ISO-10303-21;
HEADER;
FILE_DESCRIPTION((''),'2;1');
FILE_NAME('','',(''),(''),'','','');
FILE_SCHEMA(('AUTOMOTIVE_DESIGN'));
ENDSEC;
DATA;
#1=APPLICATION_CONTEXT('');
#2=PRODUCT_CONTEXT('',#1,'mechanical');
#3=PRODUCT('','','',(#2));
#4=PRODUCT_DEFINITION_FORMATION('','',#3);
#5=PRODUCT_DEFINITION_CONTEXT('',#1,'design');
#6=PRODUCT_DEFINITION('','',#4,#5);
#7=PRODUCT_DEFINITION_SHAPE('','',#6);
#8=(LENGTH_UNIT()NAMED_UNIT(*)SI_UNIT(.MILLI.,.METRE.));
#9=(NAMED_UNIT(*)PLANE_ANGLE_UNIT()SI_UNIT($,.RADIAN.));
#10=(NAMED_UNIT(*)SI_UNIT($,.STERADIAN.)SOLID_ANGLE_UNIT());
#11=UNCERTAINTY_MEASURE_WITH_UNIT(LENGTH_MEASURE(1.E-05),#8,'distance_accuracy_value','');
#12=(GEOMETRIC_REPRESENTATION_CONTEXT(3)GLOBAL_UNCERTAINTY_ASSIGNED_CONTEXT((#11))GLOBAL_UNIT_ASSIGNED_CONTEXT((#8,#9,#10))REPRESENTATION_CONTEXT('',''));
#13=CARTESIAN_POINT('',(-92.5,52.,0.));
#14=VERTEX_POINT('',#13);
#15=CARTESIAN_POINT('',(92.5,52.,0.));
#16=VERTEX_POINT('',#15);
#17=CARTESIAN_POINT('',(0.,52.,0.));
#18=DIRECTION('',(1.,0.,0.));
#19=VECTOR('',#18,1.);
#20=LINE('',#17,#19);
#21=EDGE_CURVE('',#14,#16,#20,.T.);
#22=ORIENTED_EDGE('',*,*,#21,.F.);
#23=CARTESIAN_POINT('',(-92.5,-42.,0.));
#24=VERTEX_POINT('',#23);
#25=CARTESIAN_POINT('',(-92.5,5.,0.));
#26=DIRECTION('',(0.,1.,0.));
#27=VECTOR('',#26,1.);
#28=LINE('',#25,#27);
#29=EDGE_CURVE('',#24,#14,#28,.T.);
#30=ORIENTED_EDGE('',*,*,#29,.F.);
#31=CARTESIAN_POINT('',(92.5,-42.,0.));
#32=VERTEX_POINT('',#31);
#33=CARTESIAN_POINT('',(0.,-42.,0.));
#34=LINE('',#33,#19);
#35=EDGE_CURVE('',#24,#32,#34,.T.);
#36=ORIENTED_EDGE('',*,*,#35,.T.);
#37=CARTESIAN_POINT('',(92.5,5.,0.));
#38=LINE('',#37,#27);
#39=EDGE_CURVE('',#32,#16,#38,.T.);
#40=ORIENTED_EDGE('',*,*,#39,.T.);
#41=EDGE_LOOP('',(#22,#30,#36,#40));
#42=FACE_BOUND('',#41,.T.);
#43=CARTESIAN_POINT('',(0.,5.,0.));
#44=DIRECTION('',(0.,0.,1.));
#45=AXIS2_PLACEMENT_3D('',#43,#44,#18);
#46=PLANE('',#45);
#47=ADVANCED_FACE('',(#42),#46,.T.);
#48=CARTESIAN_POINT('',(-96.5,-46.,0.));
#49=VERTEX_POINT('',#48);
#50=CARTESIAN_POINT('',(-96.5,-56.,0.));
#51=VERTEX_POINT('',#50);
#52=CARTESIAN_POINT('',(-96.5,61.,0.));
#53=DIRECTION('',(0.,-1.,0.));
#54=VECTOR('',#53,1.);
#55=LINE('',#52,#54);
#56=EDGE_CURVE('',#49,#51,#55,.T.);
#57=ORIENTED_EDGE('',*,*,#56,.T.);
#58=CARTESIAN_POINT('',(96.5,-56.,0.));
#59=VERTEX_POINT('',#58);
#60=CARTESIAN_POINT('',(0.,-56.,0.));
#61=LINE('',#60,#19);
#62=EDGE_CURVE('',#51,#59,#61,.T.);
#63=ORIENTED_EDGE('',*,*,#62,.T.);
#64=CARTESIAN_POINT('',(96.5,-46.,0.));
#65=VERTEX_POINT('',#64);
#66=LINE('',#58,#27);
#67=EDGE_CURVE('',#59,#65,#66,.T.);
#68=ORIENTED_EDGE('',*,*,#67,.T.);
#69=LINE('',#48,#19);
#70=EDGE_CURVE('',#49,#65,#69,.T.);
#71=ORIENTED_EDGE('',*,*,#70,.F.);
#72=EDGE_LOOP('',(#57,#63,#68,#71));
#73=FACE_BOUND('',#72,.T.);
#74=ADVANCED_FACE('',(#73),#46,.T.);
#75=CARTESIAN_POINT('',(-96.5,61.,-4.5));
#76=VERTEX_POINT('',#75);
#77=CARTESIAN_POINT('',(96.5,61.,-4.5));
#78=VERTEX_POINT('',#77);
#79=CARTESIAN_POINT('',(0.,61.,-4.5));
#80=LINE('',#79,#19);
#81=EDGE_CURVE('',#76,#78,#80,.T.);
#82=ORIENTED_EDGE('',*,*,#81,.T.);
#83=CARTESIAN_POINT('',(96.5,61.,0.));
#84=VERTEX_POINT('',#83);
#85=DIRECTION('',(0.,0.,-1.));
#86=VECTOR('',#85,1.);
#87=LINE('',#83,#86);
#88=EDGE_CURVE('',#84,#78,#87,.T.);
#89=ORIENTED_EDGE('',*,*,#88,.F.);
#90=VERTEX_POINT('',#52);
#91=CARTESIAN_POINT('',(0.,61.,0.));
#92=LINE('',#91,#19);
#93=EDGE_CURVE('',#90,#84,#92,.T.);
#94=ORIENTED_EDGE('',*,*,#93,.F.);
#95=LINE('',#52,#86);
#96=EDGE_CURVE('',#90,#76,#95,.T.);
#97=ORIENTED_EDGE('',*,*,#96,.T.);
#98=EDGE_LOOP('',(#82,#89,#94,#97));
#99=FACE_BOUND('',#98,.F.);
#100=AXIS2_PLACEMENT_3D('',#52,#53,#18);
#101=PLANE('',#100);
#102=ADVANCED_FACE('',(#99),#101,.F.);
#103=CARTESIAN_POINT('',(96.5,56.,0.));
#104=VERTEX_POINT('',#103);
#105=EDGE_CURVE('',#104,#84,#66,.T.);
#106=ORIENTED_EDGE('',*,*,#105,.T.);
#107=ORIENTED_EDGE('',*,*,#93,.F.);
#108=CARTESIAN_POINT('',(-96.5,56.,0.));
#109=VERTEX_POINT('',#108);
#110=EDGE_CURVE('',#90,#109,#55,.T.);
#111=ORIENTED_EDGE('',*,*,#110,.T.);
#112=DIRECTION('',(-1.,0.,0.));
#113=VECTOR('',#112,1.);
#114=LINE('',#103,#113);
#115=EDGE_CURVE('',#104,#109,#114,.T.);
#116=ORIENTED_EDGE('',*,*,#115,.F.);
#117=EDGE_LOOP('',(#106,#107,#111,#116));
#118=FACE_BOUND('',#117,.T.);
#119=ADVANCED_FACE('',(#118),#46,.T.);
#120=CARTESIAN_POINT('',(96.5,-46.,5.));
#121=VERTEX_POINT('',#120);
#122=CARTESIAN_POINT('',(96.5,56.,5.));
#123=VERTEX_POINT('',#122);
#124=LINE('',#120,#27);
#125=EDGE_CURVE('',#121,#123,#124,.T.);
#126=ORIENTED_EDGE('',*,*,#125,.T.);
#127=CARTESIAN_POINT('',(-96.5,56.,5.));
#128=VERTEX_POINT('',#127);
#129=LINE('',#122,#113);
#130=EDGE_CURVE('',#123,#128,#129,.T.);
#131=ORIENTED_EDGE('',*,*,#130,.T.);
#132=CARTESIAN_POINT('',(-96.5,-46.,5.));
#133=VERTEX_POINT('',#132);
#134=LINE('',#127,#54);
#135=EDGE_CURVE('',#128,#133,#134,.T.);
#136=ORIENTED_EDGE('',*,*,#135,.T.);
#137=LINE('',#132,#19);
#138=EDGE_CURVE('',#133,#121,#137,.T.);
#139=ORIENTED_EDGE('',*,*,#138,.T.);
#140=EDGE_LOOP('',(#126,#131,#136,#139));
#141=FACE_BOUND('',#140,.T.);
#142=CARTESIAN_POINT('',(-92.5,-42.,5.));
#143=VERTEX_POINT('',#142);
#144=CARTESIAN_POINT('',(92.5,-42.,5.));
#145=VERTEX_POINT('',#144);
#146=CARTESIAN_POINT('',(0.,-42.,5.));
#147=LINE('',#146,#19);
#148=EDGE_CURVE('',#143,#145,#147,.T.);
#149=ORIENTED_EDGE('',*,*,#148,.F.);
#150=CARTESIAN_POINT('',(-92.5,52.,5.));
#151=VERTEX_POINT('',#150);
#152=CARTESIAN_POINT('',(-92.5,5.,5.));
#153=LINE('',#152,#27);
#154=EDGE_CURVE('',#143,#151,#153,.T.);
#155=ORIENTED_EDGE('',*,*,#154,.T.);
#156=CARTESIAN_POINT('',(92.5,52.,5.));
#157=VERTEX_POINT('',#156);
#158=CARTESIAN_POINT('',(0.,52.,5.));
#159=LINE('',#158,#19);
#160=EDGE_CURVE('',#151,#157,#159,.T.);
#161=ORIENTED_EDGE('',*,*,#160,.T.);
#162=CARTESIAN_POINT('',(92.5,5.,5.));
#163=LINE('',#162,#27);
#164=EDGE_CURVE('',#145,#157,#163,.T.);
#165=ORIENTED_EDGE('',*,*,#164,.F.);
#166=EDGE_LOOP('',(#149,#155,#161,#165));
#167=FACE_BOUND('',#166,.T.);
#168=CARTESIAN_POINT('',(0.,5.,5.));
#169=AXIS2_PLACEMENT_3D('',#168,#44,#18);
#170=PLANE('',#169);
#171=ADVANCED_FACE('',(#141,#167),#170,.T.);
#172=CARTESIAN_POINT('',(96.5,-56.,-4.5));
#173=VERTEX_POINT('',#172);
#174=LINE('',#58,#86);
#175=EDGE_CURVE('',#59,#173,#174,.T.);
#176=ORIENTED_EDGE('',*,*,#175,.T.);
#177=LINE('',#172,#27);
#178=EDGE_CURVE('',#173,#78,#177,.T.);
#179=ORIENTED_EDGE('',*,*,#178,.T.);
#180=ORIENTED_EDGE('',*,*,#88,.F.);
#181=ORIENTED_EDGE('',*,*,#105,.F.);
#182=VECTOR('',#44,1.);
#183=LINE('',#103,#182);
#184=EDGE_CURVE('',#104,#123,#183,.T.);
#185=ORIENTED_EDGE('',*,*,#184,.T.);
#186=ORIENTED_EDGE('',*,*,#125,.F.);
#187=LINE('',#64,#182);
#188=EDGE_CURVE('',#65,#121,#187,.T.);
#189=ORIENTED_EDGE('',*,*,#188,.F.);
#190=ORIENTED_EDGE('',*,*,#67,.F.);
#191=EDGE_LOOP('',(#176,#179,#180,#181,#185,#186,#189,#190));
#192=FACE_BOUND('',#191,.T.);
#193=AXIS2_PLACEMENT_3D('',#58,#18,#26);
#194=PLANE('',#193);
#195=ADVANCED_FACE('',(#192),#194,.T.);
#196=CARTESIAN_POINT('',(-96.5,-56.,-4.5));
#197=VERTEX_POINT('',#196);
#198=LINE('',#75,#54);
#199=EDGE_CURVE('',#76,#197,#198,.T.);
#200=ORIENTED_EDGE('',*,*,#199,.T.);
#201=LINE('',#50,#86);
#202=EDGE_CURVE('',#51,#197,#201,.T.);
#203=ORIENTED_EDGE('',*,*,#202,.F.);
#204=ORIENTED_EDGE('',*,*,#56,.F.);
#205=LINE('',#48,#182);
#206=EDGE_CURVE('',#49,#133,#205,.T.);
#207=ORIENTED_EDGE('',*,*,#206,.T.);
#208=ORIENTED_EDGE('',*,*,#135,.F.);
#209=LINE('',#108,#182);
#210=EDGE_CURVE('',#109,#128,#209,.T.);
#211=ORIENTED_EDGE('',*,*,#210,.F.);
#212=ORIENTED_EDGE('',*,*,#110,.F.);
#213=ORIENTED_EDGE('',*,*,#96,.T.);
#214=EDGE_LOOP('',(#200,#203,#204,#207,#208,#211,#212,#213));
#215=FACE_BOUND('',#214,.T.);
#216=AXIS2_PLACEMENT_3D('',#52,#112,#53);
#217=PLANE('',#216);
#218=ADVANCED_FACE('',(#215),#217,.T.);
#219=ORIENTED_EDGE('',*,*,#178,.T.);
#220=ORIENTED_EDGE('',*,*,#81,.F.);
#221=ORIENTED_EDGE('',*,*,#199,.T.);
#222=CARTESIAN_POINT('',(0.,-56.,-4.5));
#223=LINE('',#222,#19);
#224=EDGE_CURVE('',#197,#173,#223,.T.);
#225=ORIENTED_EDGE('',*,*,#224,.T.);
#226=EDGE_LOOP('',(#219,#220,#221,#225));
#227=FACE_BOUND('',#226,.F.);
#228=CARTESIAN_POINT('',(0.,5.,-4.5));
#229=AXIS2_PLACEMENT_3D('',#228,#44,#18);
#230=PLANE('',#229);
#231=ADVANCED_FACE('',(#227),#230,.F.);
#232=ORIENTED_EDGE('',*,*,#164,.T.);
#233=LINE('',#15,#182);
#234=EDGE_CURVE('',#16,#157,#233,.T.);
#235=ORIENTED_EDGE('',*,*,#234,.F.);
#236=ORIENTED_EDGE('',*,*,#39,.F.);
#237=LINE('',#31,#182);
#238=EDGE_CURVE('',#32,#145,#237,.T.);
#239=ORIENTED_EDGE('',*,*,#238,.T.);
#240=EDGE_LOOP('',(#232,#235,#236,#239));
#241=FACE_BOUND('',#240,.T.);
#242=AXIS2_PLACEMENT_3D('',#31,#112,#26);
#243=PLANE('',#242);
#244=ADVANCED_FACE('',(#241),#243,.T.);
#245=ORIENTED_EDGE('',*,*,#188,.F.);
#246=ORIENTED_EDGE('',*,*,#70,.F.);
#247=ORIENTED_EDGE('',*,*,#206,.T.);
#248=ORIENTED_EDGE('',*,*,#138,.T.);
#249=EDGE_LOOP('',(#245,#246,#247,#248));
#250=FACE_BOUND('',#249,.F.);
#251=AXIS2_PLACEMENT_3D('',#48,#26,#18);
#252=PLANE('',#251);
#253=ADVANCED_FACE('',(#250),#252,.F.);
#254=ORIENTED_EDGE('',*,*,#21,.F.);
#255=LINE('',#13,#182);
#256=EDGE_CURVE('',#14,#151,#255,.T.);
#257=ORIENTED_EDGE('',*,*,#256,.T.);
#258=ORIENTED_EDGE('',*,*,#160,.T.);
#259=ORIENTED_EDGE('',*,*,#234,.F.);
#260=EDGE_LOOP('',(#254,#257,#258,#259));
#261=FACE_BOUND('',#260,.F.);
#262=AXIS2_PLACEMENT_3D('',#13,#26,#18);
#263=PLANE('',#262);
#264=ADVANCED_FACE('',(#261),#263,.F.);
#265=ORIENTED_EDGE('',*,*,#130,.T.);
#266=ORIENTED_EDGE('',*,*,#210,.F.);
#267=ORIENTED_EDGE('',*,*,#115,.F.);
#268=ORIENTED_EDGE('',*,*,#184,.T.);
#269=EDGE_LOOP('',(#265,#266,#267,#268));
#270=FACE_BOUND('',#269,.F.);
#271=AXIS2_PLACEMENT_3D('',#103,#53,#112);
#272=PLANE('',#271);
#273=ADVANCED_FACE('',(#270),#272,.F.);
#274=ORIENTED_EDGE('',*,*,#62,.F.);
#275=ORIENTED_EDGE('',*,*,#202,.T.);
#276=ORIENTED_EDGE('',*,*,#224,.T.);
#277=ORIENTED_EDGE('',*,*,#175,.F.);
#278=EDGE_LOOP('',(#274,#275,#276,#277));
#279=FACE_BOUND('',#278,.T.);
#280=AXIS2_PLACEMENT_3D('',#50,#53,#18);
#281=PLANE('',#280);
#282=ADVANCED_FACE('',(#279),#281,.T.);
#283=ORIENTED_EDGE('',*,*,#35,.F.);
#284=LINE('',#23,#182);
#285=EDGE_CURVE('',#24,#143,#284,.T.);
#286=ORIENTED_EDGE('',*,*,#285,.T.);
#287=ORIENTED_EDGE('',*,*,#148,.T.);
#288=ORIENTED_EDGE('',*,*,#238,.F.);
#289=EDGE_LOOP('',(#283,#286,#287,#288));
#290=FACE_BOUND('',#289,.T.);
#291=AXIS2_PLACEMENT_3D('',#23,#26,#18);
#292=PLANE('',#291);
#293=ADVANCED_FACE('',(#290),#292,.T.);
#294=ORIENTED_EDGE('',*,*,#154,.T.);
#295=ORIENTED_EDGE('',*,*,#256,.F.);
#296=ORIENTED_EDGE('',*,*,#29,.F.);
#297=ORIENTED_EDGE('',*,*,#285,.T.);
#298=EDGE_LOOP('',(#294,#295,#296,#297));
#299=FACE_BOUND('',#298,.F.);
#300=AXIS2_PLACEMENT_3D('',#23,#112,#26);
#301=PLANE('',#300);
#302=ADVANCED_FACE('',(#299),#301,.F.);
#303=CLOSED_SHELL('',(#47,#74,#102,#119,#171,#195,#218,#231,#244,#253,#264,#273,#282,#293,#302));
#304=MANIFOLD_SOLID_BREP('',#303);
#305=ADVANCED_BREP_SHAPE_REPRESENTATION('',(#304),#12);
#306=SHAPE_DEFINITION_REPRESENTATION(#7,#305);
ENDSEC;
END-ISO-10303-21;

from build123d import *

# Parameters (mm, degrees)
F0_W     = 185
F0_H     = 94
F0_W_2   = 193
F0_H_2   = 10
F0_H_3   = 5
F1_DEPTH = 4.5
F2_DEPTH = 5


# Not quite as in the source:
# - a feature names something its author has since deleted; it is built from what else it names


with BuildPart() as f1:
    # F0 (on Top) → F1 (new body)
    with BuildSketch(Plane.XY):
        Polygon((96.5, 52), (96.5, 56), (-96.5, 56), (-96.5, 52), (-96.5, -42), (-96.5, -46), (96.5, -46), (96.5, -42), align=None)
        with Locations((0, 5)):
            Rectangle(F0_W, F0_H, mode=Mode.SUBTRACT)
        with Locations((0, 5)):
            Rectangle(F0_W, F0_H)
        with Locations((0, -51)):
            Rectangle(F0_W_2, F0_H_2)
        with Locations((0, 58.5)):
            Rectangle(F0_W_2, F0_H_3)
    extrude(amount=-F1_DEPTH)

    # F0 (on Top) → F2 (join)
    with BuildSketch(Plane.XY):
        Polygon((96.5, 52), (96.5, 56), (-96.5, 56), (-96.5, 52), (-96.5, -42), (-96.5, -46), (96.5, -46), (96.5, -42), align=None)
        with Locations((0, 5)):
            Rectangle(F0_W, F0_H, mode=Mode.SUBTRACT)
    extrude(amount=F2_DEPTH)


solid = f1.part
